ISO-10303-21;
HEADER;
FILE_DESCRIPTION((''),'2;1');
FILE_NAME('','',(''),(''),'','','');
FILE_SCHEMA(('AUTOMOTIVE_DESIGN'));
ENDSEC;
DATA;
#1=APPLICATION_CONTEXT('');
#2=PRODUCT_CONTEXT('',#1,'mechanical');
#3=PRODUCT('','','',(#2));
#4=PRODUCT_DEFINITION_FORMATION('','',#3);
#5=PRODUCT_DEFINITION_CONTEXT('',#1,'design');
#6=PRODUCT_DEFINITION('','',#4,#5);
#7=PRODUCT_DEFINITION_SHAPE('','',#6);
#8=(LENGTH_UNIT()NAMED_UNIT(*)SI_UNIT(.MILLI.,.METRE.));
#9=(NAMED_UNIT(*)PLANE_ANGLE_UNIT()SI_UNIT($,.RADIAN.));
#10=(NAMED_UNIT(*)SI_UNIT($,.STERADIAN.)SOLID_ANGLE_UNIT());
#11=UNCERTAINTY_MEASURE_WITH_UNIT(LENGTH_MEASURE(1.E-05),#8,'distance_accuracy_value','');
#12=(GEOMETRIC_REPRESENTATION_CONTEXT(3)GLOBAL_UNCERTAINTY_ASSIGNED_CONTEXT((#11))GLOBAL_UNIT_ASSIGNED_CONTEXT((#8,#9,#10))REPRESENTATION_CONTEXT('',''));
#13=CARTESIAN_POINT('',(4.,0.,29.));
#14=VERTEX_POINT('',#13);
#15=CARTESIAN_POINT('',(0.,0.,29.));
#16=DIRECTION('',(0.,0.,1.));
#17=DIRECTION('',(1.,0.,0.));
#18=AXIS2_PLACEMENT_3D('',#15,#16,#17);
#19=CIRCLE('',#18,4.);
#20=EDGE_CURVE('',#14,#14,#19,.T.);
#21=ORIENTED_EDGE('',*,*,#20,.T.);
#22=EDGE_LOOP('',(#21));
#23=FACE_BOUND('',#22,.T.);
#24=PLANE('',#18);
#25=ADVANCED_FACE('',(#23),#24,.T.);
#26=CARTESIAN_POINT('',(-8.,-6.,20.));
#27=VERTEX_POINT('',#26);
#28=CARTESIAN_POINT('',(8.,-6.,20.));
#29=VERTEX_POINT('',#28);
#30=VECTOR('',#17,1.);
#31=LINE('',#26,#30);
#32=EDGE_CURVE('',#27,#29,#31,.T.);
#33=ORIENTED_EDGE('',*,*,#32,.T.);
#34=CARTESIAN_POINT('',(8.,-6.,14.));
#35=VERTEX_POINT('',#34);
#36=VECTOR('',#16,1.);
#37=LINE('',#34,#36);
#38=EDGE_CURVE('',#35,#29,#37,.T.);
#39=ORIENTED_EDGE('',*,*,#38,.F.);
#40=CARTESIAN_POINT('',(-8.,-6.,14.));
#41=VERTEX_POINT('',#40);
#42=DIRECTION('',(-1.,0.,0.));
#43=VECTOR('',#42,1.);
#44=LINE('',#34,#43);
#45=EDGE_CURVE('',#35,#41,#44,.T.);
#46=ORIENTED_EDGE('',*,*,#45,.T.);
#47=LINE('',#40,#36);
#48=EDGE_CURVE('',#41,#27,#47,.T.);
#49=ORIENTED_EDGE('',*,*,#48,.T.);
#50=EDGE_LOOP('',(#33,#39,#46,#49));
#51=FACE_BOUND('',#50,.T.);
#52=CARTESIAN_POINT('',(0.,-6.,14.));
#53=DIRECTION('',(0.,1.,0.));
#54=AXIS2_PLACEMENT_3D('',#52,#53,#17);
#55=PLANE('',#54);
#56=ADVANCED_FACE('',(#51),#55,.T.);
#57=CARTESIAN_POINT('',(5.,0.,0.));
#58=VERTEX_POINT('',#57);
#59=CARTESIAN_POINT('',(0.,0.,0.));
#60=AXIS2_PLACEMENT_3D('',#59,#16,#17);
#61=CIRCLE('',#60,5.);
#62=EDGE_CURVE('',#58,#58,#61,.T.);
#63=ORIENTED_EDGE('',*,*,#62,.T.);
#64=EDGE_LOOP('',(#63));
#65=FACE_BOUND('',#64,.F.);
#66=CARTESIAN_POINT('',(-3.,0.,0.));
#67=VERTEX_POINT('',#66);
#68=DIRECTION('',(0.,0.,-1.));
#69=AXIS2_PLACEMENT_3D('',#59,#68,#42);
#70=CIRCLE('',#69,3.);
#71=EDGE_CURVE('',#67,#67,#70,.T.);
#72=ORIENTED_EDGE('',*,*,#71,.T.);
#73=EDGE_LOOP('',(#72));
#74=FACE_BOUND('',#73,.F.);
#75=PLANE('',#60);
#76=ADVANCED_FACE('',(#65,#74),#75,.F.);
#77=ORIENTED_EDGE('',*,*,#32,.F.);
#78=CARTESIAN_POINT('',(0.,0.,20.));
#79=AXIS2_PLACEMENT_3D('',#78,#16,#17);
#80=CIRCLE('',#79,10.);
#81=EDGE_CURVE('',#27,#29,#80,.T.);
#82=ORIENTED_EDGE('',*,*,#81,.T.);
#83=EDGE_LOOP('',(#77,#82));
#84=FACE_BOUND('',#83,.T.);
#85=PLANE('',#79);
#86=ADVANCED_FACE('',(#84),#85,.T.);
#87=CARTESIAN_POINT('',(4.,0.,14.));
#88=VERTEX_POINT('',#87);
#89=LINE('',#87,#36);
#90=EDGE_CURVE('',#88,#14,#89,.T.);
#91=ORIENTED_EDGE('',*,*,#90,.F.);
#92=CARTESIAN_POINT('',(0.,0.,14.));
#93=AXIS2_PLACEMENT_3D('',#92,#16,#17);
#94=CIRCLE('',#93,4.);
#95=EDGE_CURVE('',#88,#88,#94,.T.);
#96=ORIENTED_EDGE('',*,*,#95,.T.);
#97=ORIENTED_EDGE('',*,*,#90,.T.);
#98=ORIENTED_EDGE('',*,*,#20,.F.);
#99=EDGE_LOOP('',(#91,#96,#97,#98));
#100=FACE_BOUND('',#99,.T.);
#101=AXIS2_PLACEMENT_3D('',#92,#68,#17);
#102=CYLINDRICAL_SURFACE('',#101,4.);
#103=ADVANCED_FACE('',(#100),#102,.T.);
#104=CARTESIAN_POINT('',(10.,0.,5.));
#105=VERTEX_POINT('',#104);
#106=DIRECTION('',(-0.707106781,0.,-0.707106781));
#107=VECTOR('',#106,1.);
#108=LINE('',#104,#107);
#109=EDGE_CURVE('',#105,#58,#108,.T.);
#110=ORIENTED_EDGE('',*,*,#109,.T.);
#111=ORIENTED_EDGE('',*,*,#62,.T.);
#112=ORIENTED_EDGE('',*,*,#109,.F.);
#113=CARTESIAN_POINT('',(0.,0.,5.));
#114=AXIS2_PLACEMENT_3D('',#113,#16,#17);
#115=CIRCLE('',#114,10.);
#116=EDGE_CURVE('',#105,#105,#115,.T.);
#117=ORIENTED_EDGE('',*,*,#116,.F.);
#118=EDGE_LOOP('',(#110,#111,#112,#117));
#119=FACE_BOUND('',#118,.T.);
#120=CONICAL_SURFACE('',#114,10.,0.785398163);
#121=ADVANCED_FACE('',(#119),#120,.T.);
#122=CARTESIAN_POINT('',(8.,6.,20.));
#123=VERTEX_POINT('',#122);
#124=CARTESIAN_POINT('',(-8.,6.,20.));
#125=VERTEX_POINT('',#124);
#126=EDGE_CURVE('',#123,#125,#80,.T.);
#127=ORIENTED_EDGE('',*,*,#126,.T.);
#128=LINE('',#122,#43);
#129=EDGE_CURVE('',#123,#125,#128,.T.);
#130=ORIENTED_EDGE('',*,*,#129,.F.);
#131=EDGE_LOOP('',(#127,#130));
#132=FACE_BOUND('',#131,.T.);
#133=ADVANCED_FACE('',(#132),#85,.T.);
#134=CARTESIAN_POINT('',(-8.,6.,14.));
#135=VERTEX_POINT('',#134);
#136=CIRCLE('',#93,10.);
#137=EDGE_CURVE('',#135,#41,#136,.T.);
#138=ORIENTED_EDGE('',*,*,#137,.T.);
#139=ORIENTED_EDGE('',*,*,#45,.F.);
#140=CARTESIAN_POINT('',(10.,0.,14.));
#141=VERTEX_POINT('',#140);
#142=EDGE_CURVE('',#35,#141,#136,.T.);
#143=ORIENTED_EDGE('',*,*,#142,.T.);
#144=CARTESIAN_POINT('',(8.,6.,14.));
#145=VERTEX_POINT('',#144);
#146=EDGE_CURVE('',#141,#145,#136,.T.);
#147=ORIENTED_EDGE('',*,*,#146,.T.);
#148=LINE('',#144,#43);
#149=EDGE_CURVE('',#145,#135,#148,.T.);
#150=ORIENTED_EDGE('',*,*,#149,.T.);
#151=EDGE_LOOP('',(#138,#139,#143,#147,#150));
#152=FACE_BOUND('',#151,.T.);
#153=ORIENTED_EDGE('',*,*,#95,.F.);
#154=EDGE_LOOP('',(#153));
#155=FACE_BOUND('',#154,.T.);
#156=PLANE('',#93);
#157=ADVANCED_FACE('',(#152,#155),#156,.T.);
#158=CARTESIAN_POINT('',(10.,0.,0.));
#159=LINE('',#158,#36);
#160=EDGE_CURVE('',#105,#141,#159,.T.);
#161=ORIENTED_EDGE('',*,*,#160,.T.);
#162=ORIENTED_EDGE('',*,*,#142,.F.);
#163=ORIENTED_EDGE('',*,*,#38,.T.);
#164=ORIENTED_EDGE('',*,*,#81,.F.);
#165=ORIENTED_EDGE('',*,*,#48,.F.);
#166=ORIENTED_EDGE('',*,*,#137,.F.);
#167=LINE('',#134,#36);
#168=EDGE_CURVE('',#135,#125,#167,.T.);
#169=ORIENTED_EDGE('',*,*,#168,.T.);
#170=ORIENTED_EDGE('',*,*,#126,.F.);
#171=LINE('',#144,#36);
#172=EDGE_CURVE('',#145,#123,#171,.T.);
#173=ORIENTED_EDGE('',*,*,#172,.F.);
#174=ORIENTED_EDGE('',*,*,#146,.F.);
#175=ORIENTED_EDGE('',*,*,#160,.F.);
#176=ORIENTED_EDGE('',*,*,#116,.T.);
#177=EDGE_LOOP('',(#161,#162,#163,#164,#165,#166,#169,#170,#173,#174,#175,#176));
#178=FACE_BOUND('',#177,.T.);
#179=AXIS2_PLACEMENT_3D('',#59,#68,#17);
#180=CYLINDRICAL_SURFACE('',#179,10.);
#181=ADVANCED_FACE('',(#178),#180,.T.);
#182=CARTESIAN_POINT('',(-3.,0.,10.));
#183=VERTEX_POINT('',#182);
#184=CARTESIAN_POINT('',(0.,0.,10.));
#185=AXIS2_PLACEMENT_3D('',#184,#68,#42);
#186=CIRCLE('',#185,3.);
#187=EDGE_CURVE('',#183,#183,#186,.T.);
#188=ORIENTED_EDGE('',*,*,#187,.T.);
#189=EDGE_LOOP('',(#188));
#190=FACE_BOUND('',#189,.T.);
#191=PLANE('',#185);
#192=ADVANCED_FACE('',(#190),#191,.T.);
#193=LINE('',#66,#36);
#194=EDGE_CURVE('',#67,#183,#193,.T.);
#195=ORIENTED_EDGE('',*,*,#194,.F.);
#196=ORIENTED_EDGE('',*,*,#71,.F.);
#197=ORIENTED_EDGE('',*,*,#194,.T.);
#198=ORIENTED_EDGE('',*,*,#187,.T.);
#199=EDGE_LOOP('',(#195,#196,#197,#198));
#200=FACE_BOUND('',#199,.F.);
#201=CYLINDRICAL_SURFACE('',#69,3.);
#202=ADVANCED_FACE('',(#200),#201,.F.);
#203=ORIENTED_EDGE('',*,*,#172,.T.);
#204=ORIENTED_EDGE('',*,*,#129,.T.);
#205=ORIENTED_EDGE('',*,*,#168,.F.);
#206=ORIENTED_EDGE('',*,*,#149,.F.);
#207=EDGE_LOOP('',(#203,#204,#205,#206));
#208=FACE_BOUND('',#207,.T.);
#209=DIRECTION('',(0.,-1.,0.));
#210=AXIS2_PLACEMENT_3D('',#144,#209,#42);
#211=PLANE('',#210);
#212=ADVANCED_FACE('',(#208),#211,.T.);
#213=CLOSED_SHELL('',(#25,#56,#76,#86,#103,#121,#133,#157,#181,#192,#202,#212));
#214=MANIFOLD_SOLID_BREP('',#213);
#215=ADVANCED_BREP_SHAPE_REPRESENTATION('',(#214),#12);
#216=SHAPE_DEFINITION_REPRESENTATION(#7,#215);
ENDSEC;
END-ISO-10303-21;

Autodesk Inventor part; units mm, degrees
ref_plane "YZ Plane" through (0, 0, 0) normal (1, 0, 0) x (0, 1, 0)
ref_plane "XZ Plane" through (0, 0, 0) normal (0, 1, 0) x (-1, 0, 0)
ref_plane "XY Plane" through (0, 0, 0) normal (0, 0, 1) x (1, 0, 0)
sketch "Sketch1" plane through (0, 0, 0) normal (0, 0, 1) x (1, 0, 0)
  circle A0 centre (0, 0) radius 10
  dimension "d0" = 20
extrude "Extrusion1" add sketch "Sketch1" along normal blind 18
sketch "Sketch2" plane through (0, 0, 18) normal (0, 0, 1) x (1, 0, 0)
  line L0 (0, 0) -> (0, 4) construction
  line L1 (0, 4) -> (-9.1652, 4)
  circle A0 centre (0, 0) radius 10 projected
  line L2 (0, 4) -> (9.1652, 4)
  line L3 (0, 0) -> (0, -4) construction
  line L4 (0, -4) -> (9.1652, -4)
  line L5 (0, -4) -> (-6.1702, -4)
  point P0 (-8, -6)
  dimension "d3" = 4
  dimension "d4" = 4
extrude "Extrusion2" cut sketch "Sketch2" against normal blind 4
sketch "Sketch3" plane through (0, 0, 0) normal (0, 0, -1) x (-1, 0, 0)
  circle A0 centre (0, 0) radius 3
  dimension "d7" = 6
extrude "Extrusion3" cut sketch "Sketch3" against normal blind 10
thread "Thread1" size "M6x1" class "6H" standard "ANSI Metric M Profile" full length
sketch "Sketch7" plane through (0, 0, 14) normal (0, 0, 1) x (1, 0, 0)
  line L0 (0, 0) -> (0, -6) construction
  line L1 (0, -6) -> (-8, -6)
  circle A0 centre (0, 0) radius 10 projected
  line L2 (0, -6) -> (8, -6)
  line L3 (8, 6) -> (-8, 6)
  dimension "d21" = 6
extrude "Extrusion5" add sketch "Sketch7" along normal blind 6 contours L2 A0 L1 | A0 L3
sketch "Sketch8" plane through (0, 0, 14) normal (0, 0, 1) x (1, 0, 0)
  circle A0 centre (0, 0) radius 4
  dimension "d24" = 8
extrude "Extrusion6" add sketch "Sketch8" along normal blind 15
thread "Thread4" size "M8x1.25" class "6g" standard "ANSI Metric M Profile" length 6
chamfer "Chamfer1" distance 5 angle 45 1 edges at (-10, 0, 0)
properties material "Aluminum 6061"
